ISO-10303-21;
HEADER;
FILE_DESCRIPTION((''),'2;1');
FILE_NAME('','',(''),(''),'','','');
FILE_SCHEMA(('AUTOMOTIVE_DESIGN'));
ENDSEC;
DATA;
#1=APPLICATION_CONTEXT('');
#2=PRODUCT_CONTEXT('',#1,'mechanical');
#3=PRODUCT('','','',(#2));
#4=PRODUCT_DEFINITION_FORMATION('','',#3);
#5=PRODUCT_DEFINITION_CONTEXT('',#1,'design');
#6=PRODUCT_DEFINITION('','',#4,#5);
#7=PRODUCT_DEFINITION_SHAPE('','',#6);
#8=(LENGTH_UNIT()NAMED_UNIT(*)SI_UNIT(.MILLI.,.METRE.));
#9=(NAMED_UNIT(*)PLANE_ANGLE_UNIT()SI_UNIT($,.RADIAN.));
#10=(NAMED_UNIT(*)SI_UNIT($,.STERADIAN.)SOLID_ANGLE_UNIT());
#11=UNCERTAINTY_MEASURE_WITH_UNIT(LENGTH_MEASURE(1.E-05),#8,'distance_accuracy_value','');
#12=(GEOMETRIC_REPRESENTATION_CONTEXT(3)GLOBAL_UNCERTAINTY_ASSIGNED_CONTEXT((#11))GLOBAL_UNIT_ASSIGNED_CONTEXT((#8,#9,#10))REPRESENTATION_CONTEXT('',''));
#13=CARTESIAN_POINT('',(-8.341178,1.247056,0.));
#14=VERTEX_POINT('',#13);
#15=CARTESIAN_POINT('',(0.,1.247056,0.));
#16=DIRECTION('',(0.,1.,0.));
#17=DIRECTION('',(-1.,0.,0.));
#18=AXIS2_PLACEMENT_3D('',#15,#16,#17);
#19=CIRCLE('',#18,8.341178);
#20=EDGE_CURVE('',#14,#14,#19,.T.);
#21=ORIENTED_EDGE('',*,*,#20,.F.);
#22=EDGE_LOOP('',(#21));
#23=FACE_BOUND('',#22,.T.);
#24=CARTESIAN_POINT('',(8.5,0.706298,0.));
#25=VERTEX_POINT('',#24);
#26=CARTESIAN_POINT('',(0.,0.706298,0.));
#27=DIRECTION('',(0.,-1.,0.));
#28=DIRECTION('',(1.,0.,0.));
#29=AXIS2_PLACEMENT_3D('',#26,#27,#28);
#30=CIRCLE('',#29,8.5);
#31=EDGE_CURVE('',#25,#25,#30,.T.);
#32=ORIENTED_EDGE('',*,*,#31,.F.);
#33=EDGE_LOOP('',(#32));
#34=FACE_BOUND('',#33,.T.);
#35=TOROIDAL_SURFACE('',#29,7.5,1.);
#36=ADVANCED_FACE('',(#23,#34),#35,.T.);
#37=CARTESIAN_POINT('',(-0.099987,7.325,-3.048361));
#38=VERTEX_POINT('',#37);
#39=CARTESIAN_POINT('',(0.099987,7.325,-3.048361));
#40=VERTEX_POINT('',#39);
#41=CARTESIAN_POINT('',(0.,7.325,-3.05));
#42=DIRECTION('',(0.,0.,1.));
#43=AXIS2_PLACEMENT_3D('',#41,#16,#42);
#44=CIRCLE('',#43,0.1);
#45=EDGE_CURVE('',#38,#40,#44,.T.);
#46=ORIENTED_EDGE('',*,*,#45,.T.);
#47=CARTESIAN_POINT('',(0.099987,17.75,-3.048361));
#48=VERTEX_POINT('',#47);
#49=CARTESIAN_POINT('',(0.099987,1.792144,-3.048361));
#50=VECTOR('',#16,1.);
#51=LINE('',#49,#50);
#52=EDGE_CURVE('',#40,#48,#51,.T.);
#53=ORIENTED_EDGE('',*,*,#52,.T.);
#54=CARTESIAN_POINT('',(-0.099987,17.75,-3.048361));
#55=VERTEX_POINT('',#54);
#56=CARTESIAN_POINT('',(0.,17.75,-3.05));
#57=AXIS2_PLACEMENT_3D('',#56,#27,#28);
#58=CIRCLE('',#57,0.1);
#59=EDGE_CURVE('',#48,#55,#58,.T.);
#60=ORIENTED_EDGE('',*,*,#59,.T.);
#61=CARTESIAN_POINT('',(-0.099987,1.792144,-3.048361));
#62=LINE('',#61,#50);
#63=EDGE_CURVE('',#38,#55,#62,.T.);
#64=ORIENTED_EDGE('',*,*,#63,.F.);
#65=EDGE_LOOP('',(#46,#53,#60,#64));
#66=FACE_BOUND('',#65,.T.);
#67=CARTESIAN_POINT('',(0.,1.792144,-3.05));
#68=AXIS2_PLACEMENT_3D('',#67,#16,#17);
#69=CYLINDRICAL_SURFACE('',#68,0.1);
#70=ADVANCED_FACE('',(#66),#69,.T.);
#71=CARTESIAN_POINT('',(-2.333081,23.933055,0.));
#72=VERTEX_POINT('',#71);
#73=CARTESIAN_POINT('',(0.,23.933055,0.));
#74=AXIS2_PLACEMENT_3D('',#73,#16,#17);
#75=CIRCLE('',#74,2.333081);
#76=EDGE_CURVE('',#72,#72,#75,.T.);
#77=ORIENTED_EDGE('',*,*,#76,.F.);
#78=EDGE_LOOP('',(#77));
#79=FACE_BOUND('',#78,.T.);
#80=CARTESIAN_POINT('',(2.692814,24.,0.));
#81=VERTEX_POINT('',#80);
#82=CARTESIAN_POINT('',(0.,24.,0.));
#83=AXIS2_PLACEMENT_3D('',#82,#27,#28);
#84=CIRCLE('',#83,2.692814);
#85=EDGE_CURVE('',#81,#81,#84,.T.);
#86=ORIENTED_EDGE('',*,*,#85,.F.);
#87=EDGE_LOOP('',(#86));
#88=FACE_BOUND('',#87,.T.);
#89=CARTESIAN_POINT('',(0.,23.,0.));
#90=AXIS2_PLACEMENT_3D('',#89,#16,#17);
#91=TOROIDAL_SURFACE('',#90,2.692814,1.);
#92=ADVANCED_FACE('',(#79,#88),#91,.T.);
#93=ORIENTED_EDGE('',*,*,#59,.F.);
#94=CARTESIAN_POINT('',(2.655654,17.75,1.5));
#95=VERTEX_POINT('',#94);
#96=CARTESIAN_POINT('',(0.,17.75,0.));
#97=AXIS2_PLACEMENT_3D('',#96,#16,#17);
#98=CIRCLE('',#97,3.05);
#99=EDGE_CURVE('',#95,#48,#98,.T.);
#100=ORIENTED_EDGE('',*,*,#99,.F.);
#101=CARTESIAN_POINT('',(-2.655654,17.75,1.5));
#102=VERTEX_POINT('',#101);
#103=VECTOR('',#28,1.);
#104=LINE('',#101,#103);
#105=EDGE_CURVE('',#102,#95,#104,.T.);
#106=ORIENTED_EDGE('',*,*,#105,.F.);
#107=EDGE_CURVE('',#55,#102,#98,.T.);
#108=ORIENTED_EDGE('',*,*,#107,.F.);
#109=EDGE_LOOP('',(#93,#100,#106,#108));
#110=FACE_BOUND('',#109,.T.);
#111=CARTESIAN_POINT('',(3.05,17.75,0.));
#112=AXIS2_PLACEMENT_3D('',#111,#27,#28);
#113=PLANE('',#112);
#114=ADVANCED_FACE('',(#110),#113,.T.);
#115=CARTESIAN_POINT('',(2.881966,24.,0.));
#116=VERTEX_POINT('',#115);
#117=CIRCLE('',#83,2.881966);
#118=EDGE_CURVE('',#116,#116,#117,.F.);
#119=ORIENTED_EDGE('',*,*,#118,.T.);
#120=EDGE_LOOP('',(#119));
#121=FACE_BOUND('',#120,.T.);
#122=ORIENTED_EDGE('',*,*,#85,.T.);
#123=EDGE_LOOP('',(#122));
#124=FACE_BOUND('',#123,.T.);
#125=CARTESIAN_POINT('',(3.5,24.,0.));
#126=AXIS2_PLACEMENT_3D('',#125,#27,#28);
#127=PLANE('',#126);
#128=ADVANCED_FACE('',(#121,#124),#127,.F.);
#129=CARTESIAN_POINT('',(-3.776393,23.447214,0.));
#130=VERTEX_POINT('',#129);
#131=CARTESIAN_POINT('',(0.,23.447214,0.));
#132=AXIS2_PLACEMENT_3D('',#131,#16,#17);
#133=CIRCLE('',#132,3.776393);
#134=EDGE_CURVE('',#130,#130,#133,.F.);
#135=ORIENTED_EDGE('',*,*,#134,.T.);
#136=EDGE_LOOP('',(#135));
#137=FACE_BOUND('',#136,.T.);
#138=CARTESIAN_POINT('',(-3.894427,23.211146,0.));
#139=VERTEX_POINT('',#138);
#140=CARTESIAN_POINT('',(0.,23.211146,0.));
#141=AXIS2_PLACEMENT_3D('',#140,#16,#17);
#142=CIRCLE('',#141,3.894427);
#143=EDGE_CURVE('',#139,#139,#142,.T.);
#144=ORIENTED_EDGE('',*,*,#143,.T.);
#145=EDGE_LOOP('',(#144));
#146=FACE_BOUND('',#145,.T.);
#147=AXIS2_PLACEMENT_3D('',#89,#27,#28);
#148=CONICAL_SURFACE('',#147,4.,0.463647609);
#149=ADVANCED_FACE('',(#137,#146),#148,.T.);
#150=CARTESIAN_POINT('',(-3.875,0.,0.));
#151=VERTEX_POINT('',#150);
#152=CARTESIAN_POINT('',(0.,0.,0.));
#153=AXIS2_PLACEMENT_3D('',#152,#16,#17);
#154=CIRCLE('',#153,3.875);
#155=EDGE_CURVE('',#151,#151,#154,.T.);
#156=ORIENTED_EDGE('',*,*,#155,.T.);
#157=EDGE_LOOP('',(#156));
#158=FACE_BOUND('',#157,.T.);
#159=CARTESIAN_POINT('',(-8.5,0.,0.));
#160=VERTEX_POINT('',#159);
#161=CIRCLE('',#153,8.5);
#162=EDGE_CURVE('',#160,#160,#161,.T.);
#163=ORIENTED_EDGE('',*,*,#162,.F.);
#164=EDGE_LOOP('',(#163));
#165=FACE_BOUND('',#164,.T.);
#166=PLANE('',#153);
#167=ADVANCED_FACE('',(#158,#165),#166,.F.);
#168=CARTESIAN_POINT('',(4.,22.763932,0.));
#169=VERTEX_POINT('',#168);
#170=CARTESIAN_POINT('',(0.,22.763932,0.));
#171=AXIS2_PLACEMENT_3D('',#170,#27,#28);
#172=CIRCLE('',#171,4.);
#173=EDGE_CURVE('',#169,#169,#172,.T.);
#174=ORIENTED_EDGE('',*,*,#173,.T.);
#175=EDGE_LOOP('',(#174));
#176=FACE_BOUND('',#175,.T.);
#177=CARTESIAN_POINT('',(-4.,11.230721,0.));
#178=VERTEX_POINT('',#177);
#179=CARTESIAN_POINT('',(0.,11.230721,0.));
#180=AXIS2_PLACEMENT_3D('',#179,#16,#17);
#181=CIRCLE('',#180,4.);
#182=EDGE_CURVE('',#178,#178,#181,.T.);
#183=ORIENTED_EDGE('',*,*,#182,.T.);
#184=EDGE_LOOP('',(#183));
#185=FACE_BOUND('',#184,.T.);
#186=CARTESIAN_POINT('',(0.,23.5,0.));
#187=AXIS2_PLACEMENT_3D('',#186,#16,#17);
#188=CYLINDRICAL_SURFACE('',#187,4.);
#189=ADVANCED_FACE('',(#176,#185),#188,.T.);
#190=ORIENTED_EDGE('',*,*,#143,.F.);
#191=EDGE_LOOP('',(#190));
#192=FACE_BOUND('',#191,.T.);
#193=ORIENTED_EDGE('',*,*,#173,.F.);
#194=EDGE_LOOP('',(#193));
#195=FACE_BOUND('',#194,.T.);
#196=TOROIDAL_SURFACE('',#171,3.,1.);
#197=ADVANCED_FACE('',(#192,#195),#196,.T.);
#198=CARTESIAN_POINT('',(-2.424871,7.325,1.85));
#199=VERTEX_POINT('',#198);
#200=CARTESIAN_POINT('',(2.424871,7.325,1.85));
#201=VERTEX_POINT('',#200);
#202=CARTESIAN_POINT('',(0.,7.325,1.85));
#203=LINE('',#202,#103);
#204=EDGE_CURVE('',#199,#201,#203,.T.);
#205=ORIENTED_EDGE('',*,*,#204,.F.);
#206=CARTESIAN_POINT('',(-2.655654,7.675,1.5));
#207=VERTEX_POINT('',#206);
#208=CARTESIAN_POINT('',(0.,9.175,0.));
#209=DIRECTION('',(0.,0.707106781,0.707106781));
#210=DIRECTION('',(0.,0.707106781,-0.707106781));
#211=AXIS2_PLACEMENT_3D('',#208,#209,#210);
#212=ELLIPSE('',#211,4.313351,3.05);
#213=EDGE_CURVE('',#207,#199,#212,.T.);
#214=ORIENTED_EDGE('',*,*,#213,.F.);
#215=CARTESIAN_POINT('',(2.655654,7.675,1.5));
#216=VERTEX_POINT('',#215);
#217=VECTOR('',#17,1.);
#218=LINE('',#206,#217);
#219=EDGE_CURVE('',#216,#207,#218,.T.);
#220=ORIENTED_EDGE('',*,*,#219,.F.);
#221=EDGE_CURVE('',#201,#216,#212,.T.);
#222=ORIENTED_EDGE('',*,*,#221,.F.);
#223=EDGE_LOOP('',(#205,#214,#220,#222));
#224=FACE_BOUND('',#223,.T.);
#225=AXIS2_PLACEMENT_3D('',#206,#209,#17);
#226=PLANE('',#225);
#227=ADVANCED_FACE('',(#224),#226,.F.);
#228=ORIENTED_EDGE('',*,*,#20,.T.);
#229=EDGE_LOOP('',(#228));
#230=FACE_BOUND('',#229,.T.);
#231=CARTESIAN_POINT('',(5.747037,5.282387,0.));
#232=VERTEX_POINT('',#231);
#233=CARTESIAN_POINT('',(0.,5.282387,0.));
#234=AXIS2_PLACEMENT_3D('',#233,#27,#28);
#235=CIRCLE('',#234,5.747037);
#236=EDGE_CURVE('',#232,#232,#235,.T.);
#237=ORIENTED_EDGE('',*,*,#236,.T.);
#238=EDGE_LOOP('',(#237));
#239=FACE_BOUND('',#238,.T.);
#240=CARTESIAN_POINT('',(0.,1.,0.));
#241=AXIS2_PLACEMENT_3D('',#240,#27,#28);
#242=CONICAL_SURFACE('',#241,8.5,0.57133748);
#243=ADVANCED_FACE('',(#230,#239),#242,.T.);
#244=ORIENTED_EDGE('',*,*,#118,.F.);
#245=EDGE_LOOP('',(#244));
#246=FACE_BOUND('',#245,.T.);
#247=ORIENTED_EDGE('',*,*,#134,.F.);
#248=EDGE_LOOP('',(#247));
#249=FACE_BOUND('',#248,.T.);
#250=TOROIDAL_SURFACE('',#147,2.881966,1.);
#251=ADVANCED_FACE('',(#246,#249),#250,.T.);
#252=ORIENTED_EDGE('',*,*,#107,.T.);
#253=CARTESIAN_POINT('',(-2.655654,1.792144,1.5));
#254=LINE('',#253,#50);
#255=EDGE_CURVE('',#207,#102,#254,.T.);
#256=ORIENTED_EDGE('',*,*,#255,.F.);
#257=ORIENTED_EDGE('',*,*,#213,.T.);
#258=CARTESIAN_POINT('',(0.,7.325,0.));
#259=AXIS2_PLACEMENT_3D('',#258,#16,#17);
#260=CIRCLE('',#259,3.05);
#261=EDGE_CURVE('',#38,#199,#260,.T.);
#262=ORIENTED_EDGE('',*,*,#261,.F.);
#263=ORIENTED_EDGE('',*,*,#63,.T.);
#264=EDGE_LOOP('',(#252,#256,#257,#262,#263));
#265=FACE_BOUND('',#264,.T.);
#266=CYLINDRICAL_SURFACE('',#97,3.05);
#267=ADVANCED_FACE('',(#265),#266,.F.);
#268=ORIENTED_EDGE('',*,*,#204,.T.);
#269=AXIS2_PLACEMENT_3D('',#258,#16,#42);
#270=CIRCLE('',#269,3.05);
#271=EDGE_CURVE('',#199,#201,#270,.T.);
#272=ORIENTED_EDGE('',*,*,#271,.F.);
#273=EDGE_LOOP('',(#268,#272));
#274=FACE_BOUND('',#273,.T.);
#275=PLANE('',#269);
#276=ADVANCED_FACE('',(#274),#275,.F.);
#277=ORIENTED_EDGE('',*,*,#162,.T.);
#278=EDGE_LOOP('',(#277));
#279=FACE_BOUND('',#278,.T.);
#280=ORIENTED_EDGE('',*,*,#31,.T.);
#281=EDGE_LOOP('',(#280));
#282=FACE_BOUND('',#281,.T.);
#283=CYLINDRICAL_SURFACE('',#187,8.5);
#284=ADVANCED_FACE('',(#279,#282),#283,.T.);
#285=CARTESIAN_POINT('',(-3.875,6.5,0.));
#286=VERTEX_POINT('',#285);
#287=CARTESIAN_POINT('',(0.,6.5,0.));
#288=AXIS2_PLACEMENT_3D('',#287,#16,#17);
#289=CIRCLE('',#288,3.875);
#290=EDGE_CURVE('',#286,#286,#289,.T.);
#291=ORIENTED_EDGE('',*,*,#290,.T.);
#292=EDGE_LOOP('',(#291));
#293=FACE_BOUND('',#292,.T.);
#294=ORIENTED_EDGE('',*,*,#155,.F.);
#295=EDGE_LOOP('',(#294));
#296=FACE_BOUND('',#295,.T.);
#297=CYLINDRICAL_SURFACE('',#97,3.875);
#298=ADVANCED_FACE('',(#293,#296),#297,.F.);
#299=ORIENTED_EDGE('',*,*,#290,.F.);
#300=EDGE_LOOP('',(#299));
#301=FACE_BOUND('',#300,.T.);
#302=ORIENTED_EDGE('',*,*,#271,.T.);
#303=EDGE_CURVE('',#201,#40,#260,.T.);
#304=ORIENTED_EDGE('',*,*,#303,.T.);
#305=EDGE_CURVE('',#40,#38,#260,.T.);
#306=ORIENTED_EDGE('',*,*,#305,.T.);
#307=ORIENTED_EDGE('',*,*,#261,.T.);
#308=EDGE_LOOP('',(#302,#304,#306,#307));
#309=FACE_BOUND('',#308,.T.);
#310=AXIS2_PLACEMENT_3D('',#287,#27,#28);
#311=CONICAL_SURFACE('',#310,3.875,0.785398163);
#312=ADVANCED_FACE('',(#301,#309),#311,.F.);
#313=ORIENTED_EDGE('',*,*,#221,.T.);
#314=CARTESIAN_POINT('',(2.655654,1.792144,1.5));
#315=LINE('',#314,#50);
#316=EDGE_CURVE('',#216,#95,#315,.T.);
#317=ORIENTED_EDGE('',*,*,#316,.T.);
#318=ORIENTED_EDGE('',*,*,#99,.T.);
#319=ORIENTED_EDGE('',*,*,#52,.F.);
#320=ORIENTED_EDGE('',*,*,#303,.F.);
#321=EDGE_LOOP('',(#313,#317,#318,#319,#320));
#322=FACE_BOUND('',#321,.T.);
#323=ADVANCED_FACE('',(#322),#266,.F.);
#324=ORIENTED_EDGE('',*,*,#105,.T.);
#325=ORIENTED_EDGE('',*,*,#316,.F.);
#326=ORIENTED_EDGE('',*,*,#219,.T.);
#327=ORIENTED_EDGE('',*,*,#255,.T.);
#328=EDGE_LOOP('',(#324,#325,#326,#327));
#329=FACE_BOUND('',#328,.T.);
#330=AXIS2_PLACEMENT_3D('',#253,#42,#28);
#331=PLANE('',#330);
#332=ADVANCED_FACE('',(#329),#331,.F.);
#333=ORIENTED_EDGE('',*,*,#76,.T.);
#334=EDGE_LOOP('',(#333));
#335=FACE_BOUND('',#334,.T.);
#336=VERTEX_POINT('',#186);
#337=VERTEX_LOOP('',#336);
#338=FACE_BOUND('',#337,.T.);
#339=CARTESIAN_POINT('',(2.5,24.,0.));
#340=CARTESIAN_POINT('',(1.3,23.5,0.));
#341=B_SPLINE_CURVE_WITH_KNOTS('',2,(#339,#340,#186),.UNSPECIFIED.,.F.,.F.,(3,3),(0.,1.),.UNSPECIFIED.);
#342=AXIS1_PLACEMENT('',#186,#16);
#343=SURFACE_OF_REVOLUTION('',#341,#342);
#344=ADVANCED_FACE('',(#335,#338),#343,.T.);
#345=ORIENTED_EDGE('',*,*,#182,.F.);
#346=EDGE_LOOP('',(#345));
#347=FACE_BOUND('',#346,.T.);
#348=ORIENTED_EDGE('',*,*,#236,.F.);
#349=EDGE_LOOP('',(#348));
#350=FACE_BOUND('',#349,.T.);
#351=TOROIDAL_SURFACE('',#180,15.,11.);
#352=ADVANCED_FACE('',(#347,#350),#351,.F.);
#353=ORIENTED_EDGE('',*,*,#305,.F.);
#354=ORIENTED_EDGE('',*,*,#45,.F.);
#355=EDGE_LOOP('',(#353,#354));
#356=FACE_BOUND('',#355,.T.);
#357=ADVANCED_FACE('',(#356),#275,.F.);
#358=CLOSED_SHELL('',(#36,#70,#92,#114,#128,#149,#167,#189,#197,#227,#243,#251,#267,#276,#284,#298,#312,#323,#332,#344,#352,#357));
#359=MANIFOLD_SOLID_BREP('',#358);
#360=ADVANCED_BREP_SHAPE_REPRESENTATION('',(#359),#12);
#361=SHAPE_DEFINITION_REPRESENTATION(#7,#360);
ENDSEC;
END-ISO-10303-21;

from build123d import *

# Parameters (mm, degrees)
FILLET1_R           = 11
FILLET2_R           = 1
BOSS_EXTRUDE1_DEPTH = 10.425
CHAMFER1_SIZE       = 0.35


with BuildPart() as part:
    # Sketch1 → Revolve1 (revolve)
    with BuildSketch(Plane.XY, mode=Mode.PRIVATE) as revolve1_sk:
        with BuildLine():
            Line((0, 0), (8.5, 0))
            Line((8.5, 0), (8.5, 1))
            Line((8.5, 1), (4, 8))
            Line((4, 8), (4, 23))
            Line((4, 23), (3.5, 24))
            Line((3.5, 24), (2.5, 24))
            add(Edge.make_bspline(
                [(2.5, 24), (1.3, 23.5), (0, 23.5)],
                knots=[0, 0, 0, 1, 1, 1], degree=2))
            Line((0, 23.5), (0, 0))
        make_face()
    revolve(revolve1_sk.sketch.rotate(Axis((0, 23.5, 0), (0, -1, 0)), 180), axis=Axis((0, 23.5, 0), (0, -1, 0)))

    # Fillet1
    fillet1_edges = [part.edges().sort_by_distance(p)[0] for p in [
        (4, 8, 0),
    ]]
    fillet(fillet1_edges, radius=FILLET1_R)

    # Fillet2
    fillet2_edges = [part.edges().sort_by_distance(p)[0] for p in [
        (2.5, 24, 0),
        (3.5, 24, 0),
        (4, 23, 0),
        (8.5, 1, 0),
    ]]
    fillet(fillet2_edges, radius=FILLET2_R)

    # Sketch3 → Cut-Revolve1 (revolve, cut)
    with BuildSketch(Plane.XY, mode=Mode.PRIVATE) as cut_revolve1_sk:
        Polygon((0, 0), (3.875, 0), (3.875, 6.5), (3.05, 7.325), (3.05, 17.75), (0, 17.75), align=None)
    revolve(cut_revolve1_sk.sketch.rotate(Axis((0, 17.75, 0), (0, -1, 0)), 180), axis=Axis((0, 17.75, 0), (0, -1, 0)), mode=Mode.SUBTRACT)

    # Sketch4 → Boss-Extrude1 (add)
    with BuildSketch(Plane.XZ.offset(-17.75)):
        with BuildLine():
            Line((-2.655654345, 1.5), (2.655654345, 1.5))
            ThreePointArc((2.655654345, 1.5), (0, 3.05), (-2.655654345, 1.5))
        make_face()
        with BuildLine():
            ThreePointArc((-0.099986562, -3.048360656), (0, -3.05), (0.099986562, -3.048360656))
            ThreePointArc((0.099986562, -3.048360656), (0, -2.95), (-0.099986562, -3.048360656))
        make_face()
    extrude(amount=BOSS_EXTRUDE1_DEPTH)

    # Chamfer1
    # the kernel refuses this chamfer: 0.35 mm, written as the material it takes off along each edge
    with BuildSketch(Plane(origin=(-3.555743391, 7.325, 1.5), x_dir=(0, -0.02749587661058614, 0.9996219169112968), z_dir=(1, 0, 0))) as chamfer1_piece_1_section:
        Polygon((CHAMFER1_SIZE * 0.999621916911, -CHAMFER1_SIZE * 0.0274958766106), (-CHAMFER1_SIZE * 0.0274958766106, -CHAMFER1_SIZE * 0.999621916911), (0, 0), align=None)
    chamfer1_piece_1 = extrude(amount=7.111486782, mode=Mode.PRIVATE)
    chamfer1_piece_1 = chamfer1_piece_1 & Plane(origin=(0, 7.499624527, 0), x_dir=(-1, 0, 0), z_dir=(0, 1, 0)) * Cylinder(3.05, 16, mode=Mode.PRIVATE)
    add(chamfer1_piece_1, mode=Mode.SUBTRACT)


solid = part.part
